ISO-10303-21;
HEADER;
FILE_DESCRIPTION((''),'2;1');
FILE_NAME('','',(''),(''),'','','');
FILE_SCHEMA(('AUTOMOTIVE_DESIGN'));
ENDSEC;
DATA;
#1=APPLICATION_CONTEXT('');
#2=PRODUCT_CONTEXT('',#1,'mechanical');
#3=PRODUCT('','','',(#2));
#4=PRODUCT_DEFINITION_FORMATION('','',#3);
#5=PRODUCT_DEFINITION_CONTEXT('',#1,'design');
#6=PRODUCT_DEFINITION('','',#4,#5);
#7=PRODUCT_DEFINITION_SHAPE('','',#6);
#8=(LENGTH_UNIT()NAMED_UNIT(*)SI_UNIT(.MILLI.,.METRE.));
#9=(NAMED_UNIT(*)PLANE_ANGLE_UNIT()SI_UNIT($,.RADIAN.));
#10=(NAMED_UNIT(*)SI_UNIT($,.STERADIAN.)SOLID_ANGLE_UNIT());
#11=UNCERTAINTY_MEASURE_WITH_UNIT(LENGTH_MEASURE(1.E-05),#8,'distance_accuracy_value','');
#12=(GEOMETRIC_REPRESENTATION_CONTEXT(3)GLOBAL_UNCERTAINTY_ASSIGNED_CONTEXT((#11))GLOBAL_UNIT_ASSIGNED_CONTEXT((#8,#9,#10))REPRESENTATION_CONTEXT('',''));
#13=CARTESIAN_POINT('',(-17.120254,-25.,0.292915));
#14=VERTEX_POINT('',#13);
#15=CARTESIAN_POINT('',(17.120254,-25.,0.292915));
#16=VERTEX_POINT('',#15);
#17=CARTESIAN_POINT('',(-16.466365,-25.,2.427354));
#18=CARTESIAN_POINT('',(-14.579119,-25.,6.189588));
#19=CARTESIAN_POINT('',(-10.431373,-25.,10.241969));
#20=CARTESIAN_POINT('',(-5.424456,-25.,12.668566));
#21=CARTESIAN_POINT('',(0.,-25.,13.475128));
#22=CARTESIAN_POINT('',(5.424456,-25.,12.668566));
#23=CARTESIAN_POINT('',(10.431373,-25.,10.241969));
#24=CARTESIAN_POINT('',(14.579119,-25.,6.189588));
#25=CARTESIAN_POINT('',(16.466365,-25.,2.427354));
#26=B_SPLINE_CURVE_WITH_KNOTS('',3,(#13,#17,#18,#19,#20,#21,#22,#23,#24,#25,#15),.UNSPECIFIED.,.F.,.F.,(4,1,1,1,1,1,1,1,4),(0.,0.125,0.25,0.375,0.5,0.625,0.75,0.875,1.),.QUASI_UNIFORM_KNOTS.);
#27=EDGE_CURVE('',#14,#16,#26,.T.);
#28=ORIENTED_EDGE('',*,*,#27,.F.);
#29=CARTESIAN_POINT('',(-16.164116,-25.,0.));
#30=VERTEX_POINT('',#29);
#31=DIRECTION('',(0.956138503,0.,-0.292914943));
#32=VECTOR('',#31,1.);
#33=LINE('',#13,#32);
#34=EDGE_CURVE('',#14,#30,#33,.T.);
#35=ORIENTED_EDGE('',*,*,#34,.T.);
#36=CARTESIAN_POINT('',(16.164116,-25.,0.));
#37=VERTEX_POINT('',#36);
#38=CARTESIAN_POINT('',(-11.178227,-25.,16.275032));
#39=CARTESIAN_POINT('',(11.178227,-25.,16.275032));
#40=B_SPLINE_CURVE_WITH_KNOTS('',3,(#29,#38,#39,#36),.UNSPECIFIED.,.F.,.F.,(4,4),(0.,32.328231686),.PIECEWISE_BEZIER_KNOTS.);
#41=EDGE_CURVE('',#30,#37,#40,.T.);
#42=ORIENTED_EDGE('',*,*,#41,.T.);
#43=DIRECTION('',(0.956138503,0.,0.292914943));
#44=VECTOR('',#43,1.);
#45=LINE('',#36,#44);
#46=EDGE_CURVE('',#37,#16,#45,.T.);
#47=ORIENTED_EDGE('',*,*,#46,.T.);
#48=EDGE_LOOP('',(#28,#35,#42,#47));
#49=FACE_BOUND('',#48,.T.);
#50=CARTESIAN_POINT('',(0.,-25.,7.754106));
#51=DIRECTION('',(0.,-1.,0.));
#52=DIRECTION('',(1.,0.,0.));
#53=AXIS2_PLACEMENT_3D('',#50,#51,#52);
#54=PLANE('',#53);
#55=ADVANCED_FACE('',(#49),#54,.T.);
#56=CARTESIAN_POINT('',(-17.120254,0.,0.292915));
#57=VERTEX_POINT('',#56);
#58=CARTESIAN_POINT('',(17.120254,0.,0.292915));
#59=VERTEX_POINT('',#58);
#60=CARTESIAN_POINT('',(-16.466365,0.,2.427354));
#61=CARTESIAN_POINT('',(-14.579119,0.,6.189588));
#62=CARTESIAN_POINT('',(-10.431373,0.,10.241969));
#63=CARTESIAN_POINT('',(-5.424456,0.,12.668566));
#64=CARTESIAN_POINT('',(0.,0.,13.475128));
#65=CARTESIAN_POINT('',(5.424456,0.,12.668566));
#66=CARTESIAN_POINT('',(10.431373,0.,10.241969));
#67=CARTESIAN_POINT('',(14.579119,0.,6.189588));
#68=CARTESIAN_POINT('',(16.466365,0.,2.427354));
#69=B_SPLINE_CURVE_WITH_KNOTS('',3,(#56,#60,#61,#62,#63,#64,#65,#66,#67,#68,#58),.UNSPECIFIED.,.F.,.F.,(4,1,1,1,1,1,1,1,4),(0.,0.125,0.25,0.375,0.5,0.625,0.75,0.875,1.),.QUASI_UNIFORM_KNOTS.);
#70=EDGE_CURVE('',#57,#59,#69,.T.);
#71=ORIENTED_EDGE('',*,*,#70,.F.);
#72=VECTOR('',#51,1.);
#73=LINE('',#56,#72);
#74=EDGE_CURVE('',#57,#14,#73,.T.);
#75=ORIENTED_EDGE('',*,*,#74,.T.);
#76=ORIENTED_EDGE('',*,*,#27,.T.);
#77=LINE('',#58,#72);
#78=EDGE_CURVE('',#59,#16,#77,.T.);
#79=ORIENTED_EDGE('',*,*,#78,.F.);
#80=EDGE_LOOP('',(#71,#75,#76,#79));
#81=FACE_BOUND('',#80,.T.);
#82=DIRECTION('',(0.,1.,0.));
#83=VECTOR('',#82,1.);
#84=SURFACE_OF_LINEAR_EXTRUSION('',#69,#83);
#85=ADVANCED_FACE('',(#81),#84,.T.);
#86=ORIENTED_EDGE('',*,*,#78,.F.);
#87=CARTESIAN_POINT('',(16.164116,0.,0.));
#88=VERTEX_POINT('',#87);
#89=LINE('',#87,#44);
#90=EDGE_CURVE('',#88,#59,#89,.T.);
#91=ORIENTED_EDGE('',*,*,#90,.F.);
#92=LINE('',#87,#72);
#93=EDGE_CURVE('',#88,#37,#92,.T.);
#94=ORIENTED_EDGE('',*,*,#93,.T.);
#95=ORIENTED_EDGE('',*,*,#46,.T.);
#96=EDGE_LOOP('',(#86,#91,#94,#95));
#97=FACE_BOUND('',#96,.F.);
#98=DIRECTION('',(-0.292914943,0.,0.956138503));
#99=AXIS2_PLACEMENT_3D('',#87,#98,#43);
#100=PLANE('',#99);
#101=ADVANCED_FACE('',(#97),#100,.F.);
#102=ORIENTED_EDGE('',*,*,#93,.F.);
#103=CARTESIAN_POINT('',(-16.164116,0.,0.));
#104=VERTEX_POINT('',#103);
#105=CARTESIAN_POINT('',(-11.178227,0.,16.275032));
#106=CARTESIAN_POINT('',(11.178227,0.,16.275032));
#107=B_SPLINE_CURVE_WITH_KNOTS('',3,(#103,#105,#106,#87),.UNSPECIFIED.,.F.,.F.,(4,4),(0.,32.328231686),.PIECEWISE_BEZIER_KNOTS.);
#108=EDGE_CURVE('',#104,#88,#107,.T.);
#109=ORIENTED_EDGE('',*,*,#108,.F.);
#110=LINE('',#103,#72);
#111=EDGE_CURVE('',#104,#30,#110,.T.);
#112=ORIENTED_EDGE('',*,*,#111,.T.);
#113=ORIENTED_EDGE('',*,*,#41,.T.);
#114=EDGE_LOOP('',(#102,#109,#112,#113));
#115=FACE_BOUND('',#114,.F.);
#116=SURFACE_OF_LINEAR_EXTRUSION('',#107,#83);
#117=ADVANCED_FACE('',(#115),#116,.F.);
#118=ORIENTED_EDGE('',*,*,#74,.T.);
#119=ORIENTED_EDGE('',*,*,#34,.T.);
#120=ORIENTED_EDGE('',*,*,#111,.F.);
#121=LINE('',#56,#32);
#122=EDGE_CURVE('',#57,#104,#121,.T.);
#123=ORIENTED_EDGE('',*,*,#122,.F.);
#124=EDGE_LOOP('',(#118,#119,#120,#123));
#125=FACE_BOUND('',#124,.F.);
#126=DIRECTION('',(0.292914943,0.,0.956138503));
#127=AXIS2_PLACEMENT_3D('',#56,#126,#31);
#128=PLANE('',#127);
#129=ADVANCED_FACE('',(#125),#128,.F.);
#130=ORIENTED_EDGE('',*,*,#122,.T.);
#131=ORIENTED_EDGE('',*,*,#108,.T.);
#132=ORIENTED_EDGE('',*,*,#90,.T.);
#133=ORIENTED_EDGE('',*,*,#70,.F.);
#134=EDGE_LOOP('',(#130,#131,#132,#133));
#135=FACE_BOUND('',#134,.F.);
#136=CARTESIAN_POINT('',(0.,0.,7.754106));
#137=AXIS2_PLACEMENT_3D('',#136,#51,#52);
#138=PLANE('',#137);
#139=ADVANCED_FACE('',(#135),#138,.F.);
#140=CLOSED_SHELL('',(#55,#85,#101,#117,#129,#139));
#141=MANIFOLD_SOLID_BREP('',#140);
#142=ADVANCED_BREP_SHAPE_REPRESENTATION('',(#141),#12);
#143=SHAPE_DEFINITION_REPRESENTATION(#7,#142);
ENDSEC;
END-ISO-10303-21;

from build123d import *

# Parameters (mm, degrees)
F1_DEPTH = 25


with BuildPart() as f1:
    # F0 (on Front) → F1 (new body)
    with BuildSketch(Plane.XZ):
        with BuildLine():
            Line((-17.1202543454, 0.2929149433), (-16.1641158429, 0))
            add(Edge.make_bspline(
                [(-16.1641158429, 0), (-11.1782272682, 16.2750318656), (11.1782272682, 16.2750318656), (16.1641158429, 0)],
                knots=[0, 0, 0, 0, 32.3282316857, 32.3282316857, 32.3282316857, 32.3282316857], degree=3))
            Line((16.1641158429, 0), (17.1202543454, 0.2929149433))
            add(Edge.make_bspline(
                [(-17.1202543454, 0.2929149433), (-16.4663645681, 2.4273543319), (-14.5791189005, 6.1895876945), (-10.4313726901, 10.241968629), (-5.4244559822, 12.6685663001), (0, 13.4751276988), (5.4244559822, 12.6685663001), (10.4313726901, 10.241968629), (14.5791189005, 6.1895876945), (16.4663645681, 2.4273543319), (17.1202543454, 0.2929149433)],
                knots=[0, 0, 0, 0, 0.125, 0.25, 0.375, 0.5, 0.625, 0.75, 0.875, 1, 1, 1, 1], degree=3))
        make_face()
    extrude(amount=F1_DEPTH)


solid = f1.part
